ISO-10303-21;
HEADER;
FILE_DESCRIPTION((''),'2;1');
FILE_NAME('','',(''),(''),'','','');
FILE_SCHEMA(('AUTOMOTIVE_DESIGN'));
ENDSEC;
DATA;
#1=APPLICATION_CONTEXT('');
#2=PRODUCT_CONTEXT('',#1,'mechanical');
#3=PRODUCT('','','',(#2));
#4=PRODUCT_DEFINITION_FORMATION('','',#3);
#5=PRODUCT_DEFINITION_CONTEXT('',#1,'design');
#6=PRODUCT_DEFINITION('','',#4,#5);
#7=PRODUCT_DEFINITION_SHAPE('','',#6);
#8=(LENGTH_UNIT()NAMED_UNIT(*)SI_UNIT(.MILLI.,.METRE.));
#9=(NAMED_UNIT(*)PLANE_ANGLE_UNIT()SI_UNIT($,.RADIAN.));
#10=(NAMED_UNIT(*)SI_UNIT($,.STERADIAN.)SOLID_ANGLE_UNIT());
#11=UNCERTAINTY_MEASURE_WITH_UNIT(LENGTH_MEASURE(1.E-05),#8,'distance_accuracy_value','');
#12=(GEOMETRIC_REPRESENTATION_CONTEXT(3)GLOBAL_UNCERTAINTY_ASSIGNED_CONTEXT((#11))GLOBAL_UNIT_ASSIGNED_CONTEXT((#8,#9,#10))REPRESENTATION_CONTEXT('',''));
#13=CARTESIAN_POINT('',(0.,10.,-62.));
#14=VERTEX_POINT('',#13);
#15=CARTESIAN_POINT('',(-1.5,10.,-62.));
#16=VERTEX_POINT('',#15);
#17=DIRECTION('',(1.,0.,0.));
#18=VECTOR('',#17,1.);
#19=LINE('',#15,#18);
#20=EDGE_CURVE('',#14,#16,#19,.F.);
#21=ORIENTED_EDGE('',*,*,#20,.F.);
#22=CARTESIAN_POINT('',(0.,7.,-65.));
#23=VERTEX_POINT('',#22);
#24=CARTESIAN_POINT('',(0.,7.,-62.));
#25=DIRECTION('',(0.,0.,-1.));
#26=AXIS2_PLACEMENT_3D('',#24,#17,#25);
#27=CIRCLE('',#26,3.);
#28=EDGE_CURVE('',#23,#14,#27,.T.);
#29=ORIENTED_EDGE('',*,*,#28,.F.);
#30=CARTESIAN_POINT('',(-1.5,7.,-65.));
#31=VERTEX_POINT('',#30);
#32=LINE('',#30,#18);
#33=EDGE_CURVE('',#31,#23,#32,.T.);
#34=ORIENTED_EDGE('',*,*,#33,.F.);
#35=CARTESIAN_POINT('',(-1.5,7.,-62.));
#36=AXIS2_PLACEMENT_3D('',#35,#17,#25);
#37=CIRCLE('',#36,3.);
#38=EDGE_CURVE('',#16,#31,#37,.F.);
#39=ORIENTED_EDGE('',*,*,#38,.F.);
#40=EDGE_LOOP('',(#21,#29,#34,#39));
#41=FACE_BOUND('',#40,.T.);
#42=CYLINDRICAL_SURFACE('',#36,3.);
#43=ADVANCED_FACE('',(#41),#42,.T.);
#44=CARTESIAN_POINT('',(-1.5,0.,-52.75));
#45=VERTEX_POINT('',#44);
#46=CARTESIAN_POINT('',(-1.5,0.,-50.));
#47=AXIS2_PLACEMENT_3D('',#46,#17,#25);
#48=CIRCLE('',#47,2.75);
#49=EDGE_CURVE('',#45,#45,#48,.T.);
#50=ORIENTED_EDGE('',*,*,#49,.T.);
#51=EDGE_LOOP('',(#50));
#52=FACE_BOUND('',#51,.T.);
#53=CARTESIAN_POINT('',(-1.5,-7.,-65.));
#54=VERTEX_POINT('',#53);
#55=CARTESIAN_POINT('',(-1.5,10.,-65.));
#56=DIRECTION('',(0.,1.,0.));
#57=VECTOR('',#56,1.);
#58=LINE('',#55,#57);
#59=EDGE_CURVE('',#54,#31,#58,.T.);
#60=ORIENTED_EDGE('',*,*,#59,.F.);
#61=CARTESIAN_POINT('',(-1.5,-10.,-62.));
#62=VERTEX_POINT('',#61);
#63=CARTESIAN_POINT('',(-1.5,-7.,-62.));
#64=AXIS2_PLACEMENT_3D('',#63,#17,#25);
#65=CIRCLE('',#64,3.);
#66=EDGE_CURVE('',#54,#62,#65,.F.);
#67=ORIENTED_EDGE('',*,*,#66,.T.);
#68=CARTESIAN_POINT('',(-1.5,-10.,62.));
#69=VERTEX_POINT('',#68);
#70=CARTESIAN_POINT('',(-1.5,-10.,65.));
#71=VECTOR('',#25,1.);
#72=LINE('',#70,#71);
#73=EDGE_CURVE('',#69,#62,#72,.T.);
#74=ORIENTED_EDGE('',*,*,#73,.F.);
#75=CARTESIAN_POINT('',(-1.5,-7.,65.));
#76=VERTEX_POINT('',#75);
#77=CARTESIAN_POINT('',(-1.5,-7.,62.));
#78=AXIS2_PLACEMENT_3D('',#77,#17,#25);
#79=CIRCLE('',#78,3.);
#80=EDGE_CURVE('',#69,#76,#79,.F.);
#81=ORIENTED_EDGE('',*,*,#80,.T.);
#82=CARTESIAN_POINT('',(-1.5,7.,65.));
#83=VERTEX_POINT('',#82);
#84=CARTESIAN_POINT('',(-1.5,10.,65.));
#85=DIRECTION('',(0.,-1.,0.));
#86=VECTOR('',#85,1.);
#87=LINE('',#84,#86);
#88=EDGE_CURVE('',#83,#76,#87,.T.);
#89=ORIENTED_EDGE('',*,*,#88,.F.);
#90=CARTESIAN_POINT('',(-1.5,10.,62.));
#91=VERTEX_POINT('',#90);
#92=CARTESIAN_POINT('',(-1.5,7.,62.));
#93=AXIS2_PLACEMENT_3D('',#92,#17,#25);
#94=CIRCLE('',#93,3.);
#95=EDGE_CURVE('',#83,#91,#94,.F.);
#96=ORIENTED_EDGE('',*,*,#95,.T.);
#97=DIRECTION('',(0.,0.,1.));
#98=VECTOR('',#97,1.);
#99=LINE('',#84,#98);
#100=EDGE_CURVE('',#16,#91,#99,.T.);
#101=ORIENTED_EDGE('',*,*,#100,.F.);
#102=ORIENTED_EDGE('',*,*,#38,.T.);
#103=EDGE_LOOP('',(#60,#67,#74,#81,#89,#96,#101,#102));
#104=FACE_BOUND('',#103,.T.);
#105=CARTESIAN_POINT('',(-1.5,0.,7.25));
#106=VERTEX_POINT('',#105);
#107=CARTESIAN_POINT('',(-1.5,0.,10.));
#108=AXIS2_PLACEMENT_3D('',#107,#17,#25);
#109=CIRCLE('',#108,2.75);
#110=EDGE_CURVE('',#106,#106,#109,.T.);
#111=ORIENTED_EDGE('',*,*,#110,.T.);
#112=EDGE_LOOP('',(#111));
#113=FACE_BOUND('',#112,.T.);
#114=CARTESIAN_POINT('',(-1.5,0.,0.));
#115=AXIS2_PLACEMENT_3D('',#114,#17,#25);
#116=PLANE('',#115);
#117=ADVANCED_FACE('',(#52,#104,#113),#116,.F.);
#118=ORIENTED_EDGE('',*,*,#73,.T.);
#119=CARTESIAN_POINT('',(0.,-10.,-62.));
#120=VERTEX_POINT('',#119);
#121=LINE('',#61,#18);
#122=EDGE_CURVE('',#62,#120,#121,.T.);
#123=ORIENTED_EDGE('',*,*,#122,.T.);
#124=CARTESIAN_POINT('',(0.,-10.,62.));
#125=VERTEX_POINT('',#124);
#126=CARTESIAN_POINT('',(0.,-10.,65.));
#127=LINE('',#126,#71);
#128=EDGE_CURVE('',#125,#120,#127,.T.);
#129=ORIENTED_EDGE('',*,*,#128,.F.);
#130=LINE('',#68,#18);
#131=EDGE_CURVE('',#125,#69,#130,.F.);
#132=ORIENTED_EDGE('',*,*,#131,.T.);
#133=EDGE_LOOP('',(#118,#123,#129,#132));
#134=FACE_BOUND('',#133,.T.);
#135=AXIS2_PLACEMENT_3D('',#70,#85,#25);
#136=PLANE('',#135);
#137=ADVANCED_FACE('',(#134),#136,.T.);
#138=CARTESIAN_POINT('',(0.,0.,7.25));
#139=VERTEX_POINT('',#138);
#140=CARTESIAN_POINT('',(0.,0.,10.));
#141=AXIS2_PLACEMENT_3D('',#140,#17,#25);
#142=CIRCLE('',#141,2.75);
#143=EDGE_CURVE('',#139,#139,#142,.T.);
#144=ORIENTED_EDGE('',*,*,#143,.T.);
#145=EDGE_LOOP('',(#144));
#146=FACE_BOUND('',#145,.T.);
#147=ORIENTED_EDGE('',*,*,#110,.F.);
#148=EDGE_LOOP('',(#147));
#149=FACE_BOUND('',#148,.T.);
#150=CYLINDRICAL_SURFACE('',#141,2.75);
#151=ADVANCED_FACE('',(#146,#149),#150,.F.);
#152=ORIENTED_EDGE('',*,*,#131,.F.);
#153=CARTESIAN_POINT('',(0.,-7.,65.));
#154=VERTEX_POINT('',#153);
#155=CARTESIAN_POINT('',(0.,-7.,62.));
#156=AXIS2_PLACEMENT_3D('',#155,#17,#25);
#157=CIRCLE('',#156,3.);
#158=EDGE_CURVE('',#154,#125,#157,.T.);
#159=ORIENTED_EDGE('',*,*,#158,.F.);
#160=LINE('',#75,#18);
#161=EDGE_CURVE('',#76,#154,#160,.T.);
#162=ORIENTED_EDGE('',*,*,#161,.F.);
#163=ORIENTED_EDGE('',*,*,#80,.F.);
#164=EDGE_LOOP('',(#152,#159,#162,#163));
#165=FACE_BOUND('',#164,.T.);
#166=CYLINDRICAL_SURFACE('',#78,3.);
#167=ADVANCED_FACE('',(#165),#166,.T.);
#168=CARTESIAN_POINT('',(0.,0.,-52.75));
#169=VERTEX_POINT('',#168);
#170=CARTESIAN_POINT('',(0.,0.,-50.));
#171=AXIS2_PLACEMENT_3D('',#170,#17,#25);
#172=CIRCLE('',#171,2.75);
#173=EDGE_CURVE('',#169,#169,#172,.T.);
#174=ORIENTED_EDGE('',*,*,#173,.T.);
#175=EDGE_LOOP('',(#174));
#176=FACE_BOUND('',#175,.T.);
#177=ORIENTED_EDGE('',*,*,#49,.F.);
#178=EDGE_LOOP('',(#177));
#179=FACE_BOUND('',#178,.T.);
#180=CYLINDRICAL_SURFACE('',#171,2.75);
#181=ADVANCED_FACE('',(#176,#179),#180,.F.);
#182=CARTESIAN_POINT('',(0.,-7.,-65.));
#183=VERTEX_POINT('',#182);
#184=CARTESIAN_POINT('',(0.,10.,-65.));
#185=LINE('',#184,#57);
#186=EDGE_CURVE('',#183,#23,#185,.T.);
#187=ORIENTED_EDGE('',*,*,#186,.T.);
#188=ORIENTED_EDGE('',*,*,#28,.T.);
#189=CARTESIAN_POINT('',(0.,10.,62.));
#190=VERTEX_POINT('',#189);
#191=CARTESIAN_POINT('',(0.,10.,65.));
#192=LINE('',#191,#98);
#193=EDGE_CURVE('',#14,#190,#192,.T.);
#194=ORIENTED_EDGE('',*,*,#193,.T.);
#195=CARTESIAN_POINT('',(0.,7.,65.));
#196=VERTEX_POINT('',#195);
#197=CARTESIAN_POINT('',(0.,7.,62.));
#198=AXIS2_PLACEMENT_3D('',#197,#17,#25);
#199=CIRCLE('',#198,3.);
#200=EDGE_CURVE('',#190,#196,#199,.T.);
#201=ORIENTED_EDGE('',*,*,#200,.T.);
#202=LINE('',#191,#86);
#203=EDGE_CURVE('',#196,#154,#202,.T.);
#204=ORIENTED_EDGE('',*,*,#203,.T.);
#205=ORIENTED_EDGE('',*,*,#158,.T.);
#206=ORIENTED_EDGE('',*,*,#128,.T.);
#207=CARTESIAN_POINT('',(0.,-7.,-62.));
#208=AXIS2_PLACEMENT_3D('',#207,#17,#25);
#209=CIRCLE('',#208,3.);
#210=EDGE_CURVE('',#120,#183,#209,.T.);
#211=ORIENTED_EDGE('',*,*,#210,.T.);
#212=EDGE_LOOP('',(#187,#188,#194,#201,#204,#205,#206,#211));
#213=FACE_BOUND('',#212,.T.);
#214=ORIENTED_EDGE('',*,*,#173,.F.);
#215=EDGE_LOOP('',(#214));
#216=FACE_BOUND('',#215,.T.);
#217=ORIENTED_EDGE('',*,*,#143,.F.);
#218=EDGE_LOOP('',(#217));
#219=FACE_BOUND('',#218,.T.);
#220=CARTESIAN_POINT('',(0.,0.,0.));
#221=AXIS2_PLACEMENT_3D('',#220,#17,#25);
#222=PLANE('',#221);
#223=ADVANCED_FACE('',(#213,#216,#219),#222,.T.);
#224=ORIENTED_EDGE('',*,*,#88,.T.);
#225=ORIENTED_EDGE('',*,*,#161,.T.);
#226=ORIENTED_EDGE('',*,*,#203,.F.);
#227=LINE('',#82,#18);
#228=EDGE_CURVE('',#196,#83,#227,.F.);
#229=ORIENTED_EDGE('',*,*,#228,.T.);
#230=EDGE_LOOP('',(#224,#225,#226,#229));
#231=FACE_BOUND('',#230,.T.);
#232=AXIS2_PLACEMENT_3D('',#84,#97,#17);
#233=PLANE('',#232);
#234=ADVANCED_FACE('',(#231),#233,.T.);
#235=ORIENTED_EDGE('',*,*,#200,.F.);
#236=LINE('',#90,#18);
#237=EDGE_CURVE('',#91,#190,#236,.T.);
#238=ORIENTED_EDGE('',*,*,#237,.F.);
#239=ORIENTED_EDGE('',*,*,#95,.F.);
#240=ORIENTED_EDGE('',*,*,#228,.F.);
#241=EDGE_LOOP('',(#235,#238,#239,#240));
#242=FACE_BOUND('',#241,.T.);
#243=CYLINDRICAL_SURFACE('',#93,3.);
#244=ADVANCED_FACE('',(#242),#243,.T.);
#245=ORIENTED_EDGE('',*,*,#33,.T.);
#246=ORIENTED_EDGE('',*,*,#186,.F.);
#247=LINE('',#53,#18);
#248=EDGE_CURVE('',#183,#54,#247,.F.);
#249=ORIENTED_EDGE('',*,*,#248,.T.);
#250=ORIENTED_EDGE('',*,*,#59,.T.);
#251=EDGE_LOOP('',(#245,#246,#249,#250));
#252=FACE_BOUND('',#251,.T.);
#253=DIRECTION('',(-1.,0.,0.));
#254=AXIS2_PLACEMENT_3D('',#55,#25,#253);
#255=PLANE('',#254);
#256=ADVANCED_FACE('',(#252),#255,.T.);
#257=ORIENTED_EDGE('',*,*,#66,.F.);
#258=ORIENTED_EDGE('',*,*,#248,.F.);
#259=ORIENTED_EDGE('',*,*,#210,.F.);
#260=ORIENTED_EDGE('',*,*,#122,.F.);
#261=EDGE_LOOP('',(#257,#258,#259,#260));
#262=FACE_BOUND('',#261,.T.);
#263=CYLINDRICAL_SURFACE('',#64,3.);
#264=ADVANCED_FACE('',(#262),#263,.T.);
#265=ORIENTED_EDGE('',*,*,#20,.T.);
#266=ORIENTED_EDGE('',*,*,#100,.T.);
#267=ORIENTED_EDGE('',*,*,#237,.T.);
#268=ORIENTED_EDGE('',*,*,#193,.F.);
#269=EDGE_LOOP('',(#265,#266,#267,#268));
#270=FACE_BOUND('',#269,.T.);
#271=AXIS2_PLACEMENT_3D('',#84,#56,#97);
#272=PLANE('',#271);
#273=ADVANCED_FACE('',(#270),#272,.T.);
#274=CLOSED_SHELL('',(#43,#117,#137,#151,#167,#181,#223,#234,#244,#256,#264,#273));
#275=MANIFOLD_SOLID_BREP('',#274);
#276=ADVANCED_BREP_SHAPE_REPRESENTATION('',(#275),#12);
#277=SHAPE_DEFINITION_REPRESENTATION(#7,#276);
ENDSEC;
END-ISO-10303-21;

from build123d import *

# Parameters (mm, degrees)
SZKIC1_W                = 130
SZKIC1_H                = 20
ODGI_CIE_BAZOWE1_DEPTH  = 1.5
OTW_R_POD_RUB_M51_D     = 5.5
OTW_R_POD_RUB_M51_DEPTH = 10
OTW_R_POD_RUB_M51_TIP   = 1.652366702
ZAOKR_GLENIE1_R         = 3


# Sheet-metal steps are written as plain solids
with BuildPart() as part:
    # Szkic1 → Odgięcie bazowe1 (new body)
    with BuildSketch(Plane(origin=(0, 0, 0), x_dir=(0, 0, -1), z_dir=(1, 0, 0))):
        Rectangle(SZKIC1_W, SZKIC1_H)
    extrude(amount=-ODGI_CIE_BAZOWE1_DEPTH)

    # Otwór pod śrubę M51
    with Locations(Plane(origin=(0, 0, 0), x_dir=(0, 0, -1), z_dir=(1, 0, 0))):
        with Locations((-10, 0), (50, 0)):
            Hole(OTW_R_POD_RUB_M51_D / 2, depth=OTW_R_POD_RUB_M51_DEPTH)
            with Locations((0, 0, -(OTW_R_POD_RUB_M51_DEPTH + OTW_R_POD_RUB_M51_TIP / 2))):  # 118° drill point
                Cone(0, OTW_R_POD_RUB_M51_D / 2, OTW_R_POD_RUB_M51_TIP, mode=Mode.SUBTRACT)

    # Zaokrąglenie1
    zaokr_glenie1_edges = [part.edges().sort_by_distance(p)[0] for p in [
        (-0.75, -10, -65),
        (-0.75, -10, 65),
        (-0.75, 10, 65),
        (-0.75, 10, -65),
    ]]
    fillet(zaokr_glenie1_edges, radius=ZAOKR_GLENIE1_R)


solid = part.part
